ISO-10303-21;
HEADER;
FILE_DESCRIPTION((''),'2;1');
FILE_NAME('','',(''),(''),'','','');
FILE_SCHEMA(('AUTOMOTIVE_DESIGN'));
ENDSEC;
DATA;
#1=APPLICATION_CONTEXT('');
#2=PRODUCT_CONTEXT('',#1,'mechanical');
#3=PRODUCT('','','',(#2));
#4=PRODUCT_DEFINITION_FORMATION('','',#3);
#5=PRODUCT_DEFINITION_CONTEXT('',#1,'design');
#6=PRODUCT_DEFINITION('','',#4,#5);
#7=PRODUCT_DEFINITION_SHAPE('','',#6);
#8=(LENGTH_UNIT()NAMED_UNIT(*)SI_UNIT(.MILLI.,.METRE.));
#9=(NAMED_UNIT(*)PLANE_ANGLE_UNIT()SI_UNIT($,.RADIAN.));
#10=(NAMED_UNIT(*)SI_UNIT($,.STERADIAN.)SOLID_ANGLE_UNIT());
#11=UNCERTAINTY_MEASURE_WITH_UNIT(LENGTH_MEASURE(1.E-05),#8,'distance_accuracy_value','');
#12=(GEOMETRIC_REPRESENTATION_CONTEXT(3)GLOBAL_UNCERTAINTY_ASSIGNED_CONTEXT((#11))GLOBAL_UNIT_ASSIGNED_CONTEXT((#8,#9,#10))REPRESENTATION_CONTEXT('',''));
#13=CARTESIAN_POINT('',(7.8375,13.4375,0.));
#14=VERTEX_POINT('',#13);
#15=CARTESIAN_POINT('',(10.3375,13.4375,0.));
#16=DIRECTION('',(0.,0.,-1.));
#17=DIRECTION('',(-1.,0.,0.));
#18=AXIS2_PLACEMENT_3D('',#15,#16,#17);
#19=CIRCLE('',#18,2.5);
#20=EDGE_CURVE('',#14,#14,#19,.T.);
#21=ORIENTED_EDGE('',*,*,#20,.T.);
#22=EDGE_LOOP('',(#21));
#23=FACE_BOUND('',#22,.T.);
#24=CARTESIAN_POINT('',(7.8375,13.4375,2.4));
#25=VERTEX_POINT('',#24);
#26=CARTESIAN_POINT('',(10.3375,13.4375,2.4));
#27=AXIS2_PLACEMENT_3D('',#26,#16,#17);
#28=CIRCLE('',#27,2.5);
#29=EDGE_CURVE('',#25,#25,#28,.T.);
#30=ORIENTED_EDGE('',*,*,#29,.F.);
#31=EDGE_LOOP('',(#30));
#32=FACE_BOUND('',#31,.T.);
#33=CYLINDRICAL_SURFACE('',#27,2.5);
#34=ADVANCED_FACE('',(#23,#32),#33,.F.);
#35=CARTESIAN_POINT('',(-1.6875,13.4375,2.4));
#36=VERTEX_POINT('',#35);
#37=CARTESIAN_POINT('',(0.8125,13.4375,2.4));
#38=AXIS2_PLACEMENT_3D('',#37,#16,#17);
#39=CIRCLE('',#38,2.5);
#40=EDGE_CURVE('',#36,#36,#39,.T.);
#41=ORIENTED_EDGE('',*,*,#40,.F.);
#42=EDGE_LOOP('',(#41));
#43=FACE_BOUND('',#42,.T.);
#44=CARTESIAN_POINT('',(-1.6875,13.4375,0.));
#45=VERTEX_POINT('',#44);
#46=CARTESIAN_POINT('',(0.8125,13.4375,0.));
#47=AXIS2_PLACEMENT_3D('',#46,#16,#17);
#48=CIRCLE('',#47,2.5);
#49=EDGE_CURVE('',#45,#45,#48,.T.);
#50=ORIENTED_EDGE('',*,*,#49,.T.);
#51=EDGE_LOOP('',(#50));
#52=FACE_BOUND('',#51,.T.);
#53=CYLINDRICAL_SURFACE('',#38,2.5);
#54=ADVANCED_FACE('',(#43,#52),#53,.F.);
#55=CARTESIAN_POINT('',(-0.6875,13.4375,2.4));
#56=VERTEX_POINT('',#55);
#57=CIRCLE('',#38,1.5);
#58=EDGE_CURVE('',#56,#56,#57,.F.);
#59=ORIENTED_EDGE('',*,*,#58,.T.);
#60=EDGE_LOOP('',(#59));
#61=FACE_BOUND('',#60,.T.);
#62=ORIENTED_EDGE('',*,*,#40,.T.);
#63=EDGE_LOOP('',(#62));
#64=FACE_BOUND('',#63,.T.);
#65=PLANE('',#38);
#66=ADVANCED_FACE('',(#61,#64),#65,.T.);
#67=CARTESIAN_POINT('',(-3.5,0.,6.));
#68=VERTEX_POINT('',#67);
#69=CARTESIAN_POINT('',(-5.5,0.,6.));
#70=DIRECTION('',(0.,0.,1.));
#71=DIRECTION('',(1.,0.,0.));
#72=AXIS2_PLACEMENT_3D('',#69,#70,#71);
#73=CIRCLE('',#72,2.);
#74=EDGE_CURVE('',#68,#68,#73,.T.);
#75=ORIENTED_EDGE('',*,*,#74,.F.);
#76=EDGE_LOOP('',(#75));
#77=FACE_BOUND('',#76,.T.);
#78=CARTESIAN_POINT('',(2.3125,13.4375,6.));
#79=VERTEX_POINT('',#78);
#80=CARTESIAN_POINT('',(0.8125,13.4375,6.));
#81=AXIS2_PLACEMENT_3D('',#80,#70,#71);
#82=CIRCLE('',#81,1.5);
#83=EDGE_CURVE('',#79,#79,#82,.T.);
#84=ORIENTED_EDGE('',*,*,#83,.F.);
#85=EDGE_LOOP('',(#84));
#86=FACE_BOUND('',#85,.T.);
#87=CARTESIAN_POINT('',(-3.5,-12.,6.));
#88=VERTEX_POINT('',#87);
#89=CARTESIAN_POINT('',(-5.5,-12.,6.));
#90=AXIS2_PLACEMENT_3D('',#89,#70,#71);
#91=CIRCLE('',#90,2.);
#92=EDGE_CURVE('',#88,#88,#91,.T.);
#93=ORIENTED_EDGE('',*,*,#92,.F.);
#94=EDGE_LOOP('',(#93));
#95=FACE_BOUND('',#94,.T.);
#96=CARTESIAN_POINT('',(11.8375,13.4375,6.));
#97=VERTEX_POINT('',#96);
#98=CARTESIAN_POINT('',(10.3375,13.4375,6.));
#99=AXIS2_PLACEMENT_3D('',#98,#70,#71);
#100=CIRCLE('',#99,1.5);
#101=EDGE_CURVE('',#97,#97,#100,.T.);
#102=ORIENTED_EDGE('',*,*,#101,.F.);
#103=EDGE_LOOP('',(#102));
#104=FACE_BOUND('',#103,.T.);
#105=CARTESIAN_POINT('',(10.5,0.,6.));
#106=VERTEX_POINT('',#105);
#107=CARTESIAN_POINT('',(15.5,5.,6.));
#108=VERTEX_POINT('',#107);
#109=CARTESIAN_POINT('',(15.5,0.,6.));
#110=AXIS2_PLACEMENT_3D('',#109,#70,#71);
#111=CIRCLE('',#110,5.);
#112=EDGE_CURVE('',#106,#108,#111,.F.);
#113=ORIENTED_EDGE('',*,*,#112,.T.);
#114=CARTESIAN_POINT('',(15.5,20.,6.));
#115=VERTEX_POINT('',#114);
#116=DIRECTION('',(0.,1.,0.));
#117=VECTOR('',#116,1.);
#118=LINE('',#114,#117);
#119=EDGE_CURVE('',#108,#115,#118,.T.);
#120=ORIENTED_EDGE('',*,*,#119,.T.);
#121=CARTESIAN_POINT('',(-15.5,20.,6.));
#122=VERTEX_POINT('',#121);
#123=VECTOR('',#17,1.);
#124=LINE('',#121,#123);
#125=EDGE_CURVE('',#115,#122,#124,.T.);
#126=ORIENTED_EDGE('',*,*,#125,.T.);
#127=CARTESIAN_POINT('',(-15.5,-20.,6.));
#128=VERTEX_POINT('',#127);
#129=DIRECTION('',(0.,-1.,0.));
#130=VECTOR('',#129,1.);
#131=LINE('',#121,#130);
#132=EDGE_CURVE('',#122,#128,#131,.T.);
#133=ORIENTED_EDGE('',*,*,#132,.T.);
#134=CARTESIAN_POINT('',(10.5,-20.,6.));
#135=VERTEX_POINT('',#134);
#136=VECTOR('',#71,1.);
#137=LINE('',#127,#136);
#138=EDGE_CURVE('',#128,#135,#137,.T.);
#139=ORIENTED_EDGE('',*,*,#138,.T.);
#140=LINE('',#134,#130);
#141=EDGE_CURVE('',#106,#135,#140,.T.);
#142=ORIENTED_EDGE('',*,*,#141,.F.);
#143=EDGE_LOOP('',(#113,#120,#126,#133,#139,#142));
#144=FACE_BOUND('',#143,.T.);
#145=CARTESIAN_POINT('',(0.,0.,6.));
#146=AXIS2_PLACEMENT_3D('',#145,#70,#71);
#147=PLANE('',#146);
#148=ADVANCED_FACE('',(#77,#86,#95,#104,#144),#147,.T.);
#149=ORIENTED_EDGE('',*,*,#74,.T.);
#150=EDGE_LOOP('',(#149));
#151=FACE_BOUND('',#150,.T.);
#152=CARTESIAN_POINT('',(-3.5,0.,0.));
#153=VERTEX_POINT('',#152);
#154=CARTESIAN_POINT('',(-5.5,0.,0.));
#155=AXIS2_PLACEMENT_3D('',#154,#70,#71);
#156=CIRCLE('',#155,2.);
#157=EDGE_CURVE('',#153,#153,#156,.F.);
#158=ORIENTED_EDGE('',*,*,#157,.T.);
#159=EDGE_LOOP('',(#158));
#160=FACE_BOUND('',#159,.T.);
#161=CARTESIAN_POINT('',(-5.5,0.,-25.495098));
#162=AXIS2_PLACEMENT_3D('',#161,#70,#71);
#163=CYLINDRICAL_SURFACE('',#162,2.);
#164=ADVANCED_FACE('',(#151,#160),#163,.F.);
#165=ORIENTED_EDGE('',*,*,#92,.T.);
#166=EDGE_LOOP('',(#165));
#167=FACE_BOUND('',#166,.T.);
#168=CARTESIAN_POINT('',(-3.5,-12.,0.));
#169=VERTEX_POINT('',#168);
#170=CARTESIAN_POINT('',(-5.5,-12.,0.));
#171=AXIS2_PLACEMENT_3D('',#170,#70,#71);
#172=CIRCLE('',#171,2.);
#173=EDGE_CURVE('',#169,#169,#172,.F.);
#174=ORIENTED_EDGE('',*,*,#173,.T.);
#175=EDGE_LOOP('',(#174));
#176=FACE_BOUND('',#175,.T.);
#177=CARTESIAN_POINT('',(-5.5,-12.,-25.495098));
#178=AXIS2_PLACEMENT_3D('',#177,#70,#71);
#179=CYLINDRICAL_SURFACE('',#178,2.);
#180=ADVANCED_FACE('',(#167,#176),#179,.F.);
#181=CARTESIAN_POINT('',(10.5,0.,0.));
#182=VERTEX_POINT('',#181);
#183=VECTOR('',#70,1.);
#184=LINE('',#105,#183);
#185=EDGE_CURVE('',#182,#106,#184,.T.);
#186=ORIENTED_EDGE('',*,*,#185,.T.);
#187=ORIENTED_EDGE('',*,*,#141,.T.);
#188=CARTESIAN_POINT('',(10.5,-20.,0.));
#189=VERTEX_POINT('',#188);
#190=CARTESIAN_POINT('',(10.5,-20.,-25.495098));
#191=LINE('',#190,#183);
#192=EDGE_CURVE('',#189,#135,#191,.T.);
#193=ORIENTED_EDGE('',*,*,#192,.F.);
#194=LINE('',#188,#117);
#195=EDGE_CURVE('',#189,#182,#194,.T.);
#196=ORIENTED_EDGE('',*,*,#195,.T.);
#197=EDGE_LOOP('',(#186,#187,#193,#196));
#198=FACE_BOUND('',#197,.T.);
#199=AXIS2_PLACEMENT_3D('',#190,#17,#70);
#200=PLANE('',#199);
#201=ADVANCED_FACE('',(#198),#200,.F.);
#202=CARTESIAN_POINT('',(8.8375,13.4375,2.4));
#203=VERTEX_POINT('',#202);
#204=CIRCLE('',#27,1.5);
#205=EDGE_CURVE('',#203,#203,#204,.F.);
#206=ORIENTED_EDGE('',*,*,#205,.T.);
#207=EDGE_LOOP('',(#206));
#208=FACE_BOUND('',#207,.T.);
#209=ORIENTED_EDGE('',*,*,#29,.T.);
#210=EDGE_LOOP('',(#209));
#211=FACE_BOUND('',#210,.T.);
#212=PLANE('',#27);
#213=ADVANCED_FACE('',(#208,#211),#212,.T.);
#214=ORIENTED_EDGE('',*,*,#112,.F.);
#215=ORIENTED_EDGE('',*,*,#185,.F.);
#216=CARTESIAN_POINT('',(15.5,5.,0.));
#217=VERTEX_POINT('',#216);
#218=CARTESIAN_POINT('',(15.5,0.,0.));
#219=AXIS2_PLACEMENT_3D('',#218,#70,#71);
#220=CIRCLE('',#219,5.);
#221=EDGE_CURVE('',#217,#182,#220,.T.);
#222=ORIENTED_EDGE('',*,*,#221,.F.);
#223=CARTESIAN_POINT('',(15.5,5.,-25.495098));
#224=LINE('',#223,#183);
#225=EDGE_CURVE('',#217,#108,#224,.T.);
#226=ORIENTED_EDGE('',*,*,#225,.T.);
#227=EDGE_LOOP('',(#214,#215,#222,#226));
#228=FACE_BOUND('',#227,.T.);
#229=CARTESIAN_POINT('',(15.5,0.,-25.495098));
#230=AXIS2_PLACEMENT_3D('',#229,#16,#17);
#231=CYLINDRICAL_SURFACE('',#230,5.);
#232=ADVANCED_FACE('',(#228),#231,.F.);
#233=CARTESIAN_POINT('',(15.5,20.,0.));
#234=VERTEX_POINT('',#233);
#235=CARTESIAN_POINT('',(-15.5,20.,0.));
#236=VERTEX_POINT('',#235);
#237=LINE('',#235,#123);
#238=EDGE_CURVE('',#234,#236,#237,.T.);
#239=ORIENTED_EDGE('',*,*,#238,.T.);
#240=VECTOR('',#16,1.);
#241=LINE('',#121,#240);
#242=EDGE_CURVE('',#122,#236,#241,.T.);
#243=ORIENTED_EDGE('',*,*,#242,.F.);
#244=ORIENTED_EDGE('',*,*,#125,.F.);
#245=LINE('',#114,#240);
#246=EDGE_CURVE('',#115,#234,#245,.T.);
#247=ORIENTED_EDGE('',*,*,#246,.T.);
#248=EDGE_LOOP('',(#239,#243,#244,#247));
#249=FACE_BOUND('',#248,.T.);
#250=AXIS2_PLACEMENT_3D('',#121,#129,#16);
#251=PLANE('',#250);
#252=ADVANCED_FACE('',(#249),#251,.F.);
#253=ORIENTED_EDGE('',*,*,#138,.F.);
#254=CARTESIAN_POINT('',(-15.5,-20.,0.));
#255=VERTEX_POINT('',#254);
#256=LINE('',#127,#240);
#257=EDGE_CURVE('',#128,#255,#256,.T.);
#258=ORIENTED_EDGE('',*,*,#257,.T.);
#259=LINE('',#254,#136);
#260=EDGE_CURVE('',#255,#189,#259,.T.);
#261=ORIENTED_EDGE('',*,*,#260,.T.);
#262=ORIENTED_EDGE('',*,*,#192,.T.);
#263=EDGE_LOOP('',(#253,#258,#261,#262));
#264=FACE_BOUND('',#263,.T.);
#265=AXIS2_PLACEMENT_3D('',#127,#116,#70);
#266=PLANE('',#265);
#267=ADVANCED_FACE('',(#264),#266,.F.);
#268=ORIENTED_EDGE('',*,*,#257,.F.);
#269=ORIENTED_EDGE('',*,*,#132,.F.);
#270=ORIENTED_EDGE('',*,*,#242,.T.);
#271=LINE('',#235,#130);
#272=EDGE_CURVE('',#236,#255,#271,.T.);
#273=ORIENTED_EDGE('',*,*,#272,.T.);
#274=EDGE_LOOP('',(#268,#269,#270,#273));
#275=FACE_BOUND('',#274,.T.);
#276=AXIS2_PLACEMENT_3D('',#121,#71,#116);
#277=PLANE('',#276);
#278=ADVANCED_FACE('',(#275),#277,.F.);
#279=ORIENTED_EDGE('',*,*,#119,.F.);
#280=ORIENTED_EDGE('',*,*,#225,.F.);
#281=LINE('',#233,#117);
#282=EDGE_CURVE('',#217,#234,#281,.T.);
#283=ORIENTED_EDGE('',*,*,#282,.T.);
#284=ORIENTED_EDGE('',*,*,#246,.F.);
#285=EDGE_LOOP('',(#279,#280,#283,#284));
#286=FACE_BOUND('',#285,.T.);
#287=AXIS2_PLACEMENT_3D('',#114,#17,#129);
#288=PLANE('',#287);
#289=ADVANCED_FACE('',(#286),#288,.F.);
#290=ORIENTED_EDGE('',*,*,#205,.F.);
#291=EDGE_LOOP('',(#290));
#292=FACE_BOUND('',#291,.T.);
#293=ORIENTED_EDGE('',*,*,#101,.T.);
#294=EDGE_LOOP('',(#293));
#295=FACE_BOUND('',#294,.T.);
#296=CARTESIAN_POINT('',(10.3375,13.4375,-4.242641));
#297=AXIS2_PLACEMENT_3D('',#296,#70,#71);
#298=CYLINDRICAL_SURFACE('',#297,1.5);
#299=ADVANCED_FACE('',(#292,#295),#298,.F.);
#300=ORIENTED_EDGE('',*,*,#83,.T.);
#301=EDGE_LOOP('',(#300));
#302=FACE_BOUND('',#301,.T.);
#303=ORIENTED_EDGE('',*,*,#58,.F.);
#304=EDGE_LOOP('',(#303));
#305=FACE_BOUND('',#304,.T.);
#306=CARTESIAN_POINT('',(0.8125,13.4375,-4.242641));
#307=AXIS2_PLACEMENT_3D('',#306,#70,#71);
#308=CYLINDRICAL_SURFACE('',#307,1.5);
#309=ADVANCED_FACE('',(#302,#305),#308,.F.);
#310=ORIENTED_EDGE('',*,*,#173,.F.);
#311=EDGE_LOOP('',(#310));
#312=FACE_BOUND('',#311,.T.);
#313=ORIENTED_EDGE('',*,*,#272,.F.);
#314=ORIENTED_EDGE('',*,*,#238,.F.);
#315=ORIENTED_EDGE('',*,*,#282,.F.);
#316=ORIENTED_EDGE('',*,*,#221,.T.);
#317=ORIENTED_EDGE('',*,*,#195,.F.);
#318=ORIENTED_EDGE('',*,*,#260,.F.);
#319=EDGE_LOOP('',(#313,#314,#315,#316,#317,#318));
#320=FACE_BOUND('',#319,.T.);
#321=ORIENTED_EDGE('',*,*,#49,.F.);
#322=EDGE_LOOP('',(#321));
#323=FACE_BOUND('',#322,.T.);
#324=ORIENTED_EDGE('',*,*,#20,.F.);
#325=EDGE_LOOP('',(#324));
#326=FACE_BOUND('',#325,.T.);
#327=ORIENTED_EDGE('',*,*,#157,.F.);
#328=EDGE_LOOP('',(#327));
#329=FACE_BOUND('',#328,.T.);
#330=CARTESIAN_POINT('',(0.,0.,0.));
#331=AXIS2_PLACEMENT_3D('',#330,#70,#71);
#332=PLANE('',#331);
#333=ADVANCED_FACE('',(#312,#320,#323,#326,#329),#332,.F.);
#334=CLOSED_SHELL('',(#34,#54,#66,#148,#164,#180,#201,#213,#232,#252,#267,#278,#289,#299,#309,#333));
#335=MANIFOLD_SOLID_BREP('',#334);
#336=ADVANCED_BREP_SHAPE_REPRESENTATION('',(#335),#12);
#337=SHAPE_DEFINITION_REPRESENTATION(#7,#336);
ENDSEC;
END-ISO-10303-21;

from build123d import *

# Parameters (mm, degrees)
ESBO_O1_W                = 31
ESBO_O1_H                = 40
RESSALTO_EXTRUS_O1_DEPTH = 6
ESBO_O2_R                = 2
ESBO_O2_W                = 5
ESBO_O2_H                = 25
CORTE_EXTRUS_O1_DEPTH    = 6
ESBO_O4_R                = 1.5
CORTE_EXTRUS_O2_DEPTH    = 6
ESBO_O5_R                = 2.5
CORTE_EXTRUS_O3_DEPTH    = 2.4
FILETE1_R                = 5


with BuildPart() as part:
    # Esboço1 → Ressalto-extrusão1 (new body)
    with BuildSketch(Plane.XY):
        Rectangle(ESBO_O1_W, ESBO_O1_H)
    extrude(amount=RESSALTO_EXTRUS_O1_DEPTH)

    # Esboço2 → Corte-extrusão1 (cut)
    with BuildSketch(Plane.XY.offset(6)):
        with Locations((-5.5, -12)):
            Circle(ESBO_O2_R)
        with Locations((-5.5, 0)):
            Circle(ESBO_O2_R)
        with Locations((13, -7.5)):
            Rectangle(ESBO_O2_W, ESBO_O2_H)
    extrude(amount=-CORTE_EXTRUS_O1_DEPTH, mode=Mode.SUBTRACT)

    # Esboço4 → Corte-extrusão2 (cut)
    with BuildSketch(Plane.XY.offset(6)):
        with Locations((0.8125, 13.4375)):
            Circle(ESBO_O4_R)
        with Locations((10.3375, 13.4375)):
            Circle(ESBO_O4_R)
    extrude(amount=-CORTE_EXTRUS_O2_DEPTH, mode=Mode.SUBTRACT)

    # Esboço5 → Corte-extrusão3 (cut)
    with BuildSketch(Plane(origin=(0, 0, 0), x_dir=(-1, 0, 0), z_dir=(0, 0, -1))):
        with Locations((-0.8125, 13.4375)):
            Circle(ESBO_O5_R)
        with Locations((-10.3375, 13.4375)):
            Circle(ESBO_O5_R)
    extrude(amount=-CORTE_EXTRUS_O3_DEPTH, mode=Mode.SUBTRACT)

    # Filete1
    filete1_edges = [part.edges().sort_by_distance(p)[0] for p in [
        (10.5, 5, 3),
    ]]
    fillet(filete1_edges, radius=FILETE1_R - 0.0001)  # a hair under: the kernel refuses the full size


solid = part.part
